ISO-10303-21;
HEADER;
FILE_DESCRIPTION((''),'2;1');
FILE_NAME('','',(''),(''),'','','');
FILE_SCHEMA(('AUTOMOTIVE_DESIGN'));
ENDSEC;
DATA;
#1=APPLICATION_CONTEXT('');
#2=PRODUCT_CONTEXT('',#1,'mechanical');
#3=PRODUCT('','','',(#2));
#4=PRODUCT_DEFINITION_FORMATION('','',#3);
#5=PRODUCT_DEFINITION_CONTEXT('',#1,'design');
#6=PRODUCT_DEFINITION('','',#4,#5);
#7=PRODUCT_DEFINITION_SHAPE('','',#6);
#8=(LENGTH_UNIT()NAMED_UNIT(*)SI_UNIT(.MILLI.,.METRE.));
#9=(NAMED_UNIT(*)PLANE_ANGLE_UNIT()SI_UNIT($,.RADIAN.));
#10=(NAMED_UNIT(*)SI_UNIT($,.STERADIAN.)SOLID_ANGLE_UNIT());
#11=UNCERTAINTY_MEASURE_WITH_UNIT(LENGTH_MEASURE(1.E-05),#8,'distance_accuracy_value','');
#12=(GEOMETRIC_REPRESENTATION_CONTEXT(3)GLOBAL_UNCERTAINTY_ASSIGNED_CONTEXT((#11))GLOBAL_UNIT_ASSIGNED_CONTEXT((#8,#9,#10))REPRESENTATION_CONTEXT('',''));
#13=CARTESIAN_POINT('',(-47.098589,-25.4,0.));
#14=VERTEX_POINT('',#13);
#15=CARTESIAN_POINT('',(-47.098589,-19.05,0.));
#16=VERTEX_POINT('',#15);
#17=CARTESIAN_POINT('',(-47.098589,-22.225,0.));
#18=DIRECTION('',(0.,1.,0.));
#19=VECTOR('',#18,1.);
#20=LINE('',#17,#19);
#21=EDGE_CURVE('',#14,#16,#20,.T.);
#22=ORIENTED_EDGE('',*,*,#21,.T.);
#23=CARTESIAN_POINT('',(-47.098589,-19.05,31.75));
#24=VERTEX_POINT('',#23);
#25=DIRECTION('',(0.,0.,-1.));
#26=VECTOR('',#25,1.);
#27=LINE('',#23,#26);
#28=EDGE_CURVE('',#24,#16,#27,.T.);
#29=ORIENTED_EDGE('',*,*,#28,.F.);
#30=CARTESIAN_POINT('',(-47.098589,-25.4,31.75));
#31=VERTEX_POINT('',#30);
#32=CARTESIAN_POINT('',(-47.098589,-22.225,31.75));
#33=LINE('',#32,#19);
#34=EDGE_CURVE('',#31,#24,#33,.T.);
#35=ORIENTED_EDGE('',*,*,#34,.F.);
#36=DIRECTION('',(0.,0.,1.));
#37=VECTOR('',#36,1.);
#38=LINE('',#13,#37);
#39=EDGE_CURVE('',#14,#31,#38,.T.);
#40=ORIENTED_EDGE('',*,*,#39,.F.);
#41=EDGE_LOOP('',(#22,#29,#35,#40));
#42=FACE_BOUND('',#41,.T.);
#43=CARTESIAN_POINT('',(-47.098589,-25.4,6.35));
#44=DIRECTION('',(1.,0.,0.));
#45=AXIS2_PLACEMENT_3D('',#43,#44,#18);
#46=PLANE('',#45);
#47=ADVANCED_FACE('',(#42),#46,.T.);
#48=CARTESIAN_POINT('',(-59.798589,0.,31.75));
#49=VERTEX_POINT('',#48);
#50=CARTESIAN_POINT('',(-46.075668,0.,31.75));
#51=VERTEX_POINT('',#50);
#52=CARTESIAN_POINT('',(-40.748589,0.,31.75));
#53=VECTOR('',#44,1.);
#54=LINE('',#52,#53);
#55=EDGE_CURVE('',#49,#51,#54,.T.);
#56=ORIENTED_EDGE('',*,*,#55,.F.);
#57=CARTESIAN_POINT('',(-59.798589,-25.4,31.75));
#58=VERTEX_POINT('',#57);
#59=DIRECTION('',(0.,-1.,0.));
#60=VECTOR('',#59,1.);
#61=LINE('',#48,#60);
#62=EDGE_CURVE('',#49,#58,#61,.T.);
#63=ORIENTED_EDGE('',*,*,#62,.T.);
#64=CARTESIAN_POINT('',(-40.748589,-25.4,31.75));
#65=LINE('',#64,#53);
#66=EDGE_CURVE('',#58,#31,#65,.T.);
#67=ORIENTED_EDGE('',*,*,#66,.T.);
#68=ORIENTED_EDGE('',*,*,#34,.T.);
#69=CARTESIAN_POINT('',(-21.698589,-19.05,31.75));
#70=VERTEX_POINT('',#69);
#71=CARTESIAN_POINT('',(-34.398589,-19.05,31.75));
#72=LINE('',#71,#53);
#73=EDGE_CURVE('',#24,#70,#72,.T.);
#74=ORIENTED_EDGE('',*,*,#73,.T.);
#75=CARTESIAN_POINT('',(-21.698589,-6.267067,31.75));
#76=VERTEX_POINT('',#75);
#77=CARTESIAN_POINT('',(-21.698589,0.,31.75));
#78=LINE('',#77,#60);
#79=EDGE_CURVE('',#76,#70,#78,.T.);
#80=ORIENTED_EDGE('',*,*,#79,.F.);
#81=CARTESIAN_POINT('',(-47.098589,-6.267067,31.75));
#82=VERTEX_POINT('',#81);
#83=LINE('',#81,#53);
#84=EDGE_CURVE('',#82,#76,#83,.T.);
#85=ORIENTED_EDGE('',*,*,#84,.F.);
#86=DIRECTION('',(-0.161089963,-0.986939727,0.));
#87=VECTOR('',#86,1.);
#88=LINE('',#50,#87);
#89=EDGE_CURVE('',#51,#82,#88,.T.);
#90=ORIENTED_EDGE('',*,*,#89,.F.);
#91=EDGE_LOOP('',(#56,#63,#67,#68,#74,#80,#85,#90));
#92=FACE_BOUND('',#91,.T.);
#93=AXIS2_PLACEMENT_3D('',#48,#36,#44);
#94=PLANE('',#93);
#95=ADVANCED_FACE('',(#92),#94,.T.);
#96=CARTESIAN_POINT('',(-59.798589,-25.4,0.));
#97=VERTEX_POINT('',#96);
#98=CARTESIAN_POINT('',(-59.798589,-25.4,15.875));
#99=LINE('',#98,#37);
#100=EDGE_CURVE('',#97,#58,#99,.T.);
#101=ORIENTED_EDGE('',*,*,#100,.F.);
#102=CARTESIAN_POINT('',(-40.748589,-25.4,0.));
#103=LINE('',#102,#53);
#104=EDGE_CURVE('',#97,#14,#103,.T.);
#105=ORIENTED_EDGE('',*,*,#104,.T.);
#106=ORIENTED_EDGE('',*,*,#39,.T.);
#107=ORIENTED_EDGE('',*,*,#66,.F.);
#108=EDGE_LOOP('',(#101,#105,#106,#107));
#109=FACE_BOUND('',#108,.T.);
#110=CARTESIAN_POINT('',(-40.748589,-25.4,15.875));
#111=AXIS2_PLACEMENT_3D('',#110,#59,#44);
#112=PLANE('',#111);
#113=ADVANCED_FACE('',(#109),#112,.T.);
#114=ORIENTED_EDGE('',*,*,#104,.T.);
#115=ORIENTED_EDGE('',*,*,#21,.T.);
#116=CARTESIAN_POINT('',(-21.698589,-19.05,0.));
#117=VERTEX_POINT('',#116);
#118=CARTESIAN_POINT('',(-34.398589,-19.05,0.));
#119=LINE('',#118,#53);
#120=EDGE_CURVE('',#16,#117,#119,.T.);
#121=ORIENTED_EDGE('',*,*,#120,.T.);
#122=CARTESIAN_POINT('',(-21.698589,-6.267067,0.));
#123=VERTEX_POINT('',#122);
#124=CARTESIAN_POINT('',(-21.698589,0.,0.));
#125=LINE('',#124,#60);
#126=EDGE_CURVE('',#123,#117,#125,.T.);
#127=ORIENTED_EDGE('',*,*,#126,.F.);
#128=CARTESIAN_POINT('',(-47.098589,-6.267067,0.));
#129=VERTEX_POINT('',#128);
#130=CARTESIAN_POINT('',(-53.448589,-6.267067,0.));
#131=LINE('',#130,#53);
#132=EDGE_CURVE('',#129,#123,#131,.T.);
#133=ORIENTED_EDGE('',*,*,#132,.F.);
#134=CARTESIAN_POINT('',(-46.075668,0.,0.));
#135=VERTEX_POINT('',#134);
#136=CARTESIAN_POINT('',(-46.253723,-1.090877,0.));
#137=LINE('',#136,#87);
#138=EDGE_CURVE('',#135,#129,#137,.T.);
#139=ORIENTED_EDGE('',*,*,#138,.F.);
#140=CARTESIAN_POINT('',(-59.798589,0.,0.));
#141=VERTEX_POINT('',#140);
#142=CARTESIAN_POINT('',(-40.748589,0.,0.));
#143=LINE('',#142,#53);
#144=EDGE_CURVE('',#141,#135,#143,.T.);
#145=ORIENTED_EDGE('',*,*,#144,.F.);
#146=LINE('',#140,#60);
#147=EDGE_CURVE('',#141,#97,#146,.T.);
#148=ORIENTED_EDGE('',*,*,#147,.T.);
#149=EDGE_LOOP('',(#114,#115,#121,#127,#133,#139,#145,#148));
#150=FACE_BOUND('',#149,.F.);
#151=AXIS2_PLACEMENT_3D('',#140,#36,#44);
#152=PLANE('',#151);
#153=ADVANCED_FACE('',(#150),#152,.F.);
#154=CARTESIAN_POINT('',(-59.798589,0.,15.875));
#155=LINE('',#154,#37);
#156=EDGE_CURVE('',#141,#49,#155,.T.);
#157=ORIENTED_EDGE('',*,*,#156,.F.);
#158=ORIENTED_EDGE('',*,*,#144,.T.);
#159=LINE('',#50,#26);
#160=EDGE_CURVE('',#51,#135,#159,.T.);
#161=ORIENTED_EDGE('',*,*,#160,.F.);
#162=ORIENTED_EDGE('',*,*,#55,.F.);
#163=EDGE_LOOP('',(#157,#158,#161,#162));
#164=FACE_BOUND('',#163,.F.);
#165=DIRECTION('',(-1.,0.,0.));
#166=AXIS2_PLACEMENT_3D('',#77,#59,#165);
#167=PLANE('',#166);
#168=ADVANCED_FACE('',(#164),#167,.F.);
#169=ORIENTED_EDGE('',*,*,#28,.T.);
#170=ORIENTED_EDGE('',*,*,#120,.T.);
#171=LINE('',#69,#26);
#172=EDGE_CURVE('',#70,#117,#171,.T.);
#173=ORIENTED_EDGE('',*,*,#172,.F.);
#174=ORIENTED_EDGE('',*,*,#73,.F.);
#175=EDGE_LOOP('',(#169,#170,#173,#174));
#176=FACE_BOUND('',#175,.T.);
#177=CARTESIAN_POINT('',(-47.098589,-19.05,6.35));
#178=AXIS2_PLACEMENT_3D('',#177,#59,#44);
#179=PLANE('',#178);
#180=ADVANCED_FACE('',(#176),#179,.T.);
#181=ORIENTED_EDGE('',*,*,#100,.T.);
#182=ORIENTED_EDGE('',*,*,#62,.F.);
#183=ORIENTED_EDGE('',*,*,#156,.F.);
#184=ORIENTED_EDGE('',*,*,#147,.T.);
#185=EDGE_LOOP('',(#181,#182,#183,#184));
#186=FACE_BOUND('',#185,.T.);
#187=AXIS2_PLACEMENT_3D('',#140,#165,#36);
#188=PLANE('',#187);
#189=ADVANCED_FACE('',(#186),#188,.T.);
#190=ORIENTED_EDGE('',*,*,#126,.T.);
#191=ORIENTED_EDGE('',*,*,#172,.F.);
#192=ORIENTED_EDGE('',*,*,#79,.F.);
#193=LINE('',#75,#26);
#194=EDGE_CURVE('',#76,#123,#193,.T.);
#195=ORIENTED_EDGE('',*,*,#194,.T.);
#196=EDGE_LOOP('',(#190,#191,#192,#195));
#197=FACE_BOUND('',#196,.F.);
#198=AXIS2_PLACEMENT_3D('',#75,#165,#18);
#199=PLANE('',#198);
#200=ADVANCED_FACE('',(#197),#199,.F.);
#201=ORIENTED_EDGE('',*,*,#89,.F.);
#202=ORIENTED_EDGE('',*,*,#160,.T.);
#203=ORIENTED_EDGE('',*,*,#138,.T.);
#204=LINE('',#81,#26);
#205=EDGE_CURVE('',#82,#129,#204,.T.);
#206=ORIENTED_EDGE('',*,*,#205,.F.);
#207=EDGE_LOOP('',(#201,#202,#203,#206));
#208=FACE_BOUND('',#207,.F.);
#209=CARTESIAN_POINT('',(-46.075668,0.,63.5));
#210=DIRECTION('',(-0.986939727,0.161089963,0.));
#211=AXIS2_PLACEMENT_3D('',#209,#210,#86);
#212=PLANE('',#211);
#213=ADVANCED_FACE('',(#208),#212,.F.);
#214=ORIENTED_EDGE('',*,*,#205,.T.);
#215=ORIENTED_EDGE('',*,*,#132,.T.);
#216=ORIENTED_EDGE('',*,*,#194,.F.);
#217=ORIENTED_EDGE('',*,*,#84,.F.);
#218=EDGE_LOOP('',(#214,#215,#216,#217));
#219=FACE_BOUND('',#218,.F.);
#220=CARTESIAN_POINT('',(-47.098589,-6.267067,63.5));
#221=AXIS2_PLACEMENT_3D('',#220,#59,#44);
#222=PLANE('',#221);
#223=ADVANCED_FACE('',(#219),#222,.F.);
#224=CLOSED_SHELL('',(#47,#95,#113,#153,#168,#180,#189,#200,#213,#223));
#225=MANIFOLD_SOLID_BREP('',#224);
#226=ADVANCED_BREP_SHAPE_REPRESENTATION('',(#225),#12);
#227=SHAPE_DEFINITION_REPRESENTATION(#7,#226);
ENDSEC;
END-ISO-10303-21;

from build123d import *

# Parameters (mm, degrees)
F0_W     = 38.1
F0_H     = 31.75
F1_DEPTH = 25.4
F2_W     = 25.4
F2_H     = 6.35
F3_DEPTH = 25.4
F4_DEPTH = 6.35
F6_DEPTH = 31.75
F7_DEPTH = 57.15
F8_DEPTH = 25.4


with BuildPart() as f1:
    # F0 (on Front) → F1 (new body)
    with BuildSketch(Plane.XZ):
        with Locations((-40.7485894724, 15.875)):
            Rectangle(F0_W, F0_H)
    extrude(amount=F1_DEPTH)

    # F2 (on face) → F3 (cut)
    with BuildSketch(Plane.XY.offset(31.75)):
        with Locations((-34.3985894724, -22.225)):
            Rectangle(F2_W, F2_H)
    extrude(amount=-F3_DEPTH, mode=Mode.SUBTRACT)

    # F4 (cut): a face of the model
    f4_faces = [f1.faces().sort_by_distance(p)[0] for p in [
        (-34.3985894724, -22.225, 6.35),
    ]]
    extrude(f4_faces, amount=-F4_DEPTH, mode=Mode.SUBTRACT)

    # F5 (on face) → F6 (join)
    with BuildSketch(Plane.XY.offset(31.75)):
        Polygon((-47.0985894724, -6.2670672635), (-21.6985894724, -6.2670672635), (-21.6985894724, 0), (-46.0756682071, 0), align=None)
    extrude(amount=F6_DEPTH)

    # F7 (cut): a face of the model
    f7_faces = [f1.faces().sort_by_distance(p)[0] for p in [
        (-34.1446109127, -3.1549983853, 63.5),
    ]]
    extrude(f7_faces, amount=-F7_DEPTH, mode=Mode.SUBTRACT)

    # F8 (cut): a face of the model
    f8_faces = [f1.faces().sort_by_distance(p)[0] for p in [
        (-34.1446109127, -3.1549983853, 6.35),
    ]]
    extrude(f8_faces, amount=-F8_DEPTH, mode=Mode.SUBTRACT)


solid = f1.part
